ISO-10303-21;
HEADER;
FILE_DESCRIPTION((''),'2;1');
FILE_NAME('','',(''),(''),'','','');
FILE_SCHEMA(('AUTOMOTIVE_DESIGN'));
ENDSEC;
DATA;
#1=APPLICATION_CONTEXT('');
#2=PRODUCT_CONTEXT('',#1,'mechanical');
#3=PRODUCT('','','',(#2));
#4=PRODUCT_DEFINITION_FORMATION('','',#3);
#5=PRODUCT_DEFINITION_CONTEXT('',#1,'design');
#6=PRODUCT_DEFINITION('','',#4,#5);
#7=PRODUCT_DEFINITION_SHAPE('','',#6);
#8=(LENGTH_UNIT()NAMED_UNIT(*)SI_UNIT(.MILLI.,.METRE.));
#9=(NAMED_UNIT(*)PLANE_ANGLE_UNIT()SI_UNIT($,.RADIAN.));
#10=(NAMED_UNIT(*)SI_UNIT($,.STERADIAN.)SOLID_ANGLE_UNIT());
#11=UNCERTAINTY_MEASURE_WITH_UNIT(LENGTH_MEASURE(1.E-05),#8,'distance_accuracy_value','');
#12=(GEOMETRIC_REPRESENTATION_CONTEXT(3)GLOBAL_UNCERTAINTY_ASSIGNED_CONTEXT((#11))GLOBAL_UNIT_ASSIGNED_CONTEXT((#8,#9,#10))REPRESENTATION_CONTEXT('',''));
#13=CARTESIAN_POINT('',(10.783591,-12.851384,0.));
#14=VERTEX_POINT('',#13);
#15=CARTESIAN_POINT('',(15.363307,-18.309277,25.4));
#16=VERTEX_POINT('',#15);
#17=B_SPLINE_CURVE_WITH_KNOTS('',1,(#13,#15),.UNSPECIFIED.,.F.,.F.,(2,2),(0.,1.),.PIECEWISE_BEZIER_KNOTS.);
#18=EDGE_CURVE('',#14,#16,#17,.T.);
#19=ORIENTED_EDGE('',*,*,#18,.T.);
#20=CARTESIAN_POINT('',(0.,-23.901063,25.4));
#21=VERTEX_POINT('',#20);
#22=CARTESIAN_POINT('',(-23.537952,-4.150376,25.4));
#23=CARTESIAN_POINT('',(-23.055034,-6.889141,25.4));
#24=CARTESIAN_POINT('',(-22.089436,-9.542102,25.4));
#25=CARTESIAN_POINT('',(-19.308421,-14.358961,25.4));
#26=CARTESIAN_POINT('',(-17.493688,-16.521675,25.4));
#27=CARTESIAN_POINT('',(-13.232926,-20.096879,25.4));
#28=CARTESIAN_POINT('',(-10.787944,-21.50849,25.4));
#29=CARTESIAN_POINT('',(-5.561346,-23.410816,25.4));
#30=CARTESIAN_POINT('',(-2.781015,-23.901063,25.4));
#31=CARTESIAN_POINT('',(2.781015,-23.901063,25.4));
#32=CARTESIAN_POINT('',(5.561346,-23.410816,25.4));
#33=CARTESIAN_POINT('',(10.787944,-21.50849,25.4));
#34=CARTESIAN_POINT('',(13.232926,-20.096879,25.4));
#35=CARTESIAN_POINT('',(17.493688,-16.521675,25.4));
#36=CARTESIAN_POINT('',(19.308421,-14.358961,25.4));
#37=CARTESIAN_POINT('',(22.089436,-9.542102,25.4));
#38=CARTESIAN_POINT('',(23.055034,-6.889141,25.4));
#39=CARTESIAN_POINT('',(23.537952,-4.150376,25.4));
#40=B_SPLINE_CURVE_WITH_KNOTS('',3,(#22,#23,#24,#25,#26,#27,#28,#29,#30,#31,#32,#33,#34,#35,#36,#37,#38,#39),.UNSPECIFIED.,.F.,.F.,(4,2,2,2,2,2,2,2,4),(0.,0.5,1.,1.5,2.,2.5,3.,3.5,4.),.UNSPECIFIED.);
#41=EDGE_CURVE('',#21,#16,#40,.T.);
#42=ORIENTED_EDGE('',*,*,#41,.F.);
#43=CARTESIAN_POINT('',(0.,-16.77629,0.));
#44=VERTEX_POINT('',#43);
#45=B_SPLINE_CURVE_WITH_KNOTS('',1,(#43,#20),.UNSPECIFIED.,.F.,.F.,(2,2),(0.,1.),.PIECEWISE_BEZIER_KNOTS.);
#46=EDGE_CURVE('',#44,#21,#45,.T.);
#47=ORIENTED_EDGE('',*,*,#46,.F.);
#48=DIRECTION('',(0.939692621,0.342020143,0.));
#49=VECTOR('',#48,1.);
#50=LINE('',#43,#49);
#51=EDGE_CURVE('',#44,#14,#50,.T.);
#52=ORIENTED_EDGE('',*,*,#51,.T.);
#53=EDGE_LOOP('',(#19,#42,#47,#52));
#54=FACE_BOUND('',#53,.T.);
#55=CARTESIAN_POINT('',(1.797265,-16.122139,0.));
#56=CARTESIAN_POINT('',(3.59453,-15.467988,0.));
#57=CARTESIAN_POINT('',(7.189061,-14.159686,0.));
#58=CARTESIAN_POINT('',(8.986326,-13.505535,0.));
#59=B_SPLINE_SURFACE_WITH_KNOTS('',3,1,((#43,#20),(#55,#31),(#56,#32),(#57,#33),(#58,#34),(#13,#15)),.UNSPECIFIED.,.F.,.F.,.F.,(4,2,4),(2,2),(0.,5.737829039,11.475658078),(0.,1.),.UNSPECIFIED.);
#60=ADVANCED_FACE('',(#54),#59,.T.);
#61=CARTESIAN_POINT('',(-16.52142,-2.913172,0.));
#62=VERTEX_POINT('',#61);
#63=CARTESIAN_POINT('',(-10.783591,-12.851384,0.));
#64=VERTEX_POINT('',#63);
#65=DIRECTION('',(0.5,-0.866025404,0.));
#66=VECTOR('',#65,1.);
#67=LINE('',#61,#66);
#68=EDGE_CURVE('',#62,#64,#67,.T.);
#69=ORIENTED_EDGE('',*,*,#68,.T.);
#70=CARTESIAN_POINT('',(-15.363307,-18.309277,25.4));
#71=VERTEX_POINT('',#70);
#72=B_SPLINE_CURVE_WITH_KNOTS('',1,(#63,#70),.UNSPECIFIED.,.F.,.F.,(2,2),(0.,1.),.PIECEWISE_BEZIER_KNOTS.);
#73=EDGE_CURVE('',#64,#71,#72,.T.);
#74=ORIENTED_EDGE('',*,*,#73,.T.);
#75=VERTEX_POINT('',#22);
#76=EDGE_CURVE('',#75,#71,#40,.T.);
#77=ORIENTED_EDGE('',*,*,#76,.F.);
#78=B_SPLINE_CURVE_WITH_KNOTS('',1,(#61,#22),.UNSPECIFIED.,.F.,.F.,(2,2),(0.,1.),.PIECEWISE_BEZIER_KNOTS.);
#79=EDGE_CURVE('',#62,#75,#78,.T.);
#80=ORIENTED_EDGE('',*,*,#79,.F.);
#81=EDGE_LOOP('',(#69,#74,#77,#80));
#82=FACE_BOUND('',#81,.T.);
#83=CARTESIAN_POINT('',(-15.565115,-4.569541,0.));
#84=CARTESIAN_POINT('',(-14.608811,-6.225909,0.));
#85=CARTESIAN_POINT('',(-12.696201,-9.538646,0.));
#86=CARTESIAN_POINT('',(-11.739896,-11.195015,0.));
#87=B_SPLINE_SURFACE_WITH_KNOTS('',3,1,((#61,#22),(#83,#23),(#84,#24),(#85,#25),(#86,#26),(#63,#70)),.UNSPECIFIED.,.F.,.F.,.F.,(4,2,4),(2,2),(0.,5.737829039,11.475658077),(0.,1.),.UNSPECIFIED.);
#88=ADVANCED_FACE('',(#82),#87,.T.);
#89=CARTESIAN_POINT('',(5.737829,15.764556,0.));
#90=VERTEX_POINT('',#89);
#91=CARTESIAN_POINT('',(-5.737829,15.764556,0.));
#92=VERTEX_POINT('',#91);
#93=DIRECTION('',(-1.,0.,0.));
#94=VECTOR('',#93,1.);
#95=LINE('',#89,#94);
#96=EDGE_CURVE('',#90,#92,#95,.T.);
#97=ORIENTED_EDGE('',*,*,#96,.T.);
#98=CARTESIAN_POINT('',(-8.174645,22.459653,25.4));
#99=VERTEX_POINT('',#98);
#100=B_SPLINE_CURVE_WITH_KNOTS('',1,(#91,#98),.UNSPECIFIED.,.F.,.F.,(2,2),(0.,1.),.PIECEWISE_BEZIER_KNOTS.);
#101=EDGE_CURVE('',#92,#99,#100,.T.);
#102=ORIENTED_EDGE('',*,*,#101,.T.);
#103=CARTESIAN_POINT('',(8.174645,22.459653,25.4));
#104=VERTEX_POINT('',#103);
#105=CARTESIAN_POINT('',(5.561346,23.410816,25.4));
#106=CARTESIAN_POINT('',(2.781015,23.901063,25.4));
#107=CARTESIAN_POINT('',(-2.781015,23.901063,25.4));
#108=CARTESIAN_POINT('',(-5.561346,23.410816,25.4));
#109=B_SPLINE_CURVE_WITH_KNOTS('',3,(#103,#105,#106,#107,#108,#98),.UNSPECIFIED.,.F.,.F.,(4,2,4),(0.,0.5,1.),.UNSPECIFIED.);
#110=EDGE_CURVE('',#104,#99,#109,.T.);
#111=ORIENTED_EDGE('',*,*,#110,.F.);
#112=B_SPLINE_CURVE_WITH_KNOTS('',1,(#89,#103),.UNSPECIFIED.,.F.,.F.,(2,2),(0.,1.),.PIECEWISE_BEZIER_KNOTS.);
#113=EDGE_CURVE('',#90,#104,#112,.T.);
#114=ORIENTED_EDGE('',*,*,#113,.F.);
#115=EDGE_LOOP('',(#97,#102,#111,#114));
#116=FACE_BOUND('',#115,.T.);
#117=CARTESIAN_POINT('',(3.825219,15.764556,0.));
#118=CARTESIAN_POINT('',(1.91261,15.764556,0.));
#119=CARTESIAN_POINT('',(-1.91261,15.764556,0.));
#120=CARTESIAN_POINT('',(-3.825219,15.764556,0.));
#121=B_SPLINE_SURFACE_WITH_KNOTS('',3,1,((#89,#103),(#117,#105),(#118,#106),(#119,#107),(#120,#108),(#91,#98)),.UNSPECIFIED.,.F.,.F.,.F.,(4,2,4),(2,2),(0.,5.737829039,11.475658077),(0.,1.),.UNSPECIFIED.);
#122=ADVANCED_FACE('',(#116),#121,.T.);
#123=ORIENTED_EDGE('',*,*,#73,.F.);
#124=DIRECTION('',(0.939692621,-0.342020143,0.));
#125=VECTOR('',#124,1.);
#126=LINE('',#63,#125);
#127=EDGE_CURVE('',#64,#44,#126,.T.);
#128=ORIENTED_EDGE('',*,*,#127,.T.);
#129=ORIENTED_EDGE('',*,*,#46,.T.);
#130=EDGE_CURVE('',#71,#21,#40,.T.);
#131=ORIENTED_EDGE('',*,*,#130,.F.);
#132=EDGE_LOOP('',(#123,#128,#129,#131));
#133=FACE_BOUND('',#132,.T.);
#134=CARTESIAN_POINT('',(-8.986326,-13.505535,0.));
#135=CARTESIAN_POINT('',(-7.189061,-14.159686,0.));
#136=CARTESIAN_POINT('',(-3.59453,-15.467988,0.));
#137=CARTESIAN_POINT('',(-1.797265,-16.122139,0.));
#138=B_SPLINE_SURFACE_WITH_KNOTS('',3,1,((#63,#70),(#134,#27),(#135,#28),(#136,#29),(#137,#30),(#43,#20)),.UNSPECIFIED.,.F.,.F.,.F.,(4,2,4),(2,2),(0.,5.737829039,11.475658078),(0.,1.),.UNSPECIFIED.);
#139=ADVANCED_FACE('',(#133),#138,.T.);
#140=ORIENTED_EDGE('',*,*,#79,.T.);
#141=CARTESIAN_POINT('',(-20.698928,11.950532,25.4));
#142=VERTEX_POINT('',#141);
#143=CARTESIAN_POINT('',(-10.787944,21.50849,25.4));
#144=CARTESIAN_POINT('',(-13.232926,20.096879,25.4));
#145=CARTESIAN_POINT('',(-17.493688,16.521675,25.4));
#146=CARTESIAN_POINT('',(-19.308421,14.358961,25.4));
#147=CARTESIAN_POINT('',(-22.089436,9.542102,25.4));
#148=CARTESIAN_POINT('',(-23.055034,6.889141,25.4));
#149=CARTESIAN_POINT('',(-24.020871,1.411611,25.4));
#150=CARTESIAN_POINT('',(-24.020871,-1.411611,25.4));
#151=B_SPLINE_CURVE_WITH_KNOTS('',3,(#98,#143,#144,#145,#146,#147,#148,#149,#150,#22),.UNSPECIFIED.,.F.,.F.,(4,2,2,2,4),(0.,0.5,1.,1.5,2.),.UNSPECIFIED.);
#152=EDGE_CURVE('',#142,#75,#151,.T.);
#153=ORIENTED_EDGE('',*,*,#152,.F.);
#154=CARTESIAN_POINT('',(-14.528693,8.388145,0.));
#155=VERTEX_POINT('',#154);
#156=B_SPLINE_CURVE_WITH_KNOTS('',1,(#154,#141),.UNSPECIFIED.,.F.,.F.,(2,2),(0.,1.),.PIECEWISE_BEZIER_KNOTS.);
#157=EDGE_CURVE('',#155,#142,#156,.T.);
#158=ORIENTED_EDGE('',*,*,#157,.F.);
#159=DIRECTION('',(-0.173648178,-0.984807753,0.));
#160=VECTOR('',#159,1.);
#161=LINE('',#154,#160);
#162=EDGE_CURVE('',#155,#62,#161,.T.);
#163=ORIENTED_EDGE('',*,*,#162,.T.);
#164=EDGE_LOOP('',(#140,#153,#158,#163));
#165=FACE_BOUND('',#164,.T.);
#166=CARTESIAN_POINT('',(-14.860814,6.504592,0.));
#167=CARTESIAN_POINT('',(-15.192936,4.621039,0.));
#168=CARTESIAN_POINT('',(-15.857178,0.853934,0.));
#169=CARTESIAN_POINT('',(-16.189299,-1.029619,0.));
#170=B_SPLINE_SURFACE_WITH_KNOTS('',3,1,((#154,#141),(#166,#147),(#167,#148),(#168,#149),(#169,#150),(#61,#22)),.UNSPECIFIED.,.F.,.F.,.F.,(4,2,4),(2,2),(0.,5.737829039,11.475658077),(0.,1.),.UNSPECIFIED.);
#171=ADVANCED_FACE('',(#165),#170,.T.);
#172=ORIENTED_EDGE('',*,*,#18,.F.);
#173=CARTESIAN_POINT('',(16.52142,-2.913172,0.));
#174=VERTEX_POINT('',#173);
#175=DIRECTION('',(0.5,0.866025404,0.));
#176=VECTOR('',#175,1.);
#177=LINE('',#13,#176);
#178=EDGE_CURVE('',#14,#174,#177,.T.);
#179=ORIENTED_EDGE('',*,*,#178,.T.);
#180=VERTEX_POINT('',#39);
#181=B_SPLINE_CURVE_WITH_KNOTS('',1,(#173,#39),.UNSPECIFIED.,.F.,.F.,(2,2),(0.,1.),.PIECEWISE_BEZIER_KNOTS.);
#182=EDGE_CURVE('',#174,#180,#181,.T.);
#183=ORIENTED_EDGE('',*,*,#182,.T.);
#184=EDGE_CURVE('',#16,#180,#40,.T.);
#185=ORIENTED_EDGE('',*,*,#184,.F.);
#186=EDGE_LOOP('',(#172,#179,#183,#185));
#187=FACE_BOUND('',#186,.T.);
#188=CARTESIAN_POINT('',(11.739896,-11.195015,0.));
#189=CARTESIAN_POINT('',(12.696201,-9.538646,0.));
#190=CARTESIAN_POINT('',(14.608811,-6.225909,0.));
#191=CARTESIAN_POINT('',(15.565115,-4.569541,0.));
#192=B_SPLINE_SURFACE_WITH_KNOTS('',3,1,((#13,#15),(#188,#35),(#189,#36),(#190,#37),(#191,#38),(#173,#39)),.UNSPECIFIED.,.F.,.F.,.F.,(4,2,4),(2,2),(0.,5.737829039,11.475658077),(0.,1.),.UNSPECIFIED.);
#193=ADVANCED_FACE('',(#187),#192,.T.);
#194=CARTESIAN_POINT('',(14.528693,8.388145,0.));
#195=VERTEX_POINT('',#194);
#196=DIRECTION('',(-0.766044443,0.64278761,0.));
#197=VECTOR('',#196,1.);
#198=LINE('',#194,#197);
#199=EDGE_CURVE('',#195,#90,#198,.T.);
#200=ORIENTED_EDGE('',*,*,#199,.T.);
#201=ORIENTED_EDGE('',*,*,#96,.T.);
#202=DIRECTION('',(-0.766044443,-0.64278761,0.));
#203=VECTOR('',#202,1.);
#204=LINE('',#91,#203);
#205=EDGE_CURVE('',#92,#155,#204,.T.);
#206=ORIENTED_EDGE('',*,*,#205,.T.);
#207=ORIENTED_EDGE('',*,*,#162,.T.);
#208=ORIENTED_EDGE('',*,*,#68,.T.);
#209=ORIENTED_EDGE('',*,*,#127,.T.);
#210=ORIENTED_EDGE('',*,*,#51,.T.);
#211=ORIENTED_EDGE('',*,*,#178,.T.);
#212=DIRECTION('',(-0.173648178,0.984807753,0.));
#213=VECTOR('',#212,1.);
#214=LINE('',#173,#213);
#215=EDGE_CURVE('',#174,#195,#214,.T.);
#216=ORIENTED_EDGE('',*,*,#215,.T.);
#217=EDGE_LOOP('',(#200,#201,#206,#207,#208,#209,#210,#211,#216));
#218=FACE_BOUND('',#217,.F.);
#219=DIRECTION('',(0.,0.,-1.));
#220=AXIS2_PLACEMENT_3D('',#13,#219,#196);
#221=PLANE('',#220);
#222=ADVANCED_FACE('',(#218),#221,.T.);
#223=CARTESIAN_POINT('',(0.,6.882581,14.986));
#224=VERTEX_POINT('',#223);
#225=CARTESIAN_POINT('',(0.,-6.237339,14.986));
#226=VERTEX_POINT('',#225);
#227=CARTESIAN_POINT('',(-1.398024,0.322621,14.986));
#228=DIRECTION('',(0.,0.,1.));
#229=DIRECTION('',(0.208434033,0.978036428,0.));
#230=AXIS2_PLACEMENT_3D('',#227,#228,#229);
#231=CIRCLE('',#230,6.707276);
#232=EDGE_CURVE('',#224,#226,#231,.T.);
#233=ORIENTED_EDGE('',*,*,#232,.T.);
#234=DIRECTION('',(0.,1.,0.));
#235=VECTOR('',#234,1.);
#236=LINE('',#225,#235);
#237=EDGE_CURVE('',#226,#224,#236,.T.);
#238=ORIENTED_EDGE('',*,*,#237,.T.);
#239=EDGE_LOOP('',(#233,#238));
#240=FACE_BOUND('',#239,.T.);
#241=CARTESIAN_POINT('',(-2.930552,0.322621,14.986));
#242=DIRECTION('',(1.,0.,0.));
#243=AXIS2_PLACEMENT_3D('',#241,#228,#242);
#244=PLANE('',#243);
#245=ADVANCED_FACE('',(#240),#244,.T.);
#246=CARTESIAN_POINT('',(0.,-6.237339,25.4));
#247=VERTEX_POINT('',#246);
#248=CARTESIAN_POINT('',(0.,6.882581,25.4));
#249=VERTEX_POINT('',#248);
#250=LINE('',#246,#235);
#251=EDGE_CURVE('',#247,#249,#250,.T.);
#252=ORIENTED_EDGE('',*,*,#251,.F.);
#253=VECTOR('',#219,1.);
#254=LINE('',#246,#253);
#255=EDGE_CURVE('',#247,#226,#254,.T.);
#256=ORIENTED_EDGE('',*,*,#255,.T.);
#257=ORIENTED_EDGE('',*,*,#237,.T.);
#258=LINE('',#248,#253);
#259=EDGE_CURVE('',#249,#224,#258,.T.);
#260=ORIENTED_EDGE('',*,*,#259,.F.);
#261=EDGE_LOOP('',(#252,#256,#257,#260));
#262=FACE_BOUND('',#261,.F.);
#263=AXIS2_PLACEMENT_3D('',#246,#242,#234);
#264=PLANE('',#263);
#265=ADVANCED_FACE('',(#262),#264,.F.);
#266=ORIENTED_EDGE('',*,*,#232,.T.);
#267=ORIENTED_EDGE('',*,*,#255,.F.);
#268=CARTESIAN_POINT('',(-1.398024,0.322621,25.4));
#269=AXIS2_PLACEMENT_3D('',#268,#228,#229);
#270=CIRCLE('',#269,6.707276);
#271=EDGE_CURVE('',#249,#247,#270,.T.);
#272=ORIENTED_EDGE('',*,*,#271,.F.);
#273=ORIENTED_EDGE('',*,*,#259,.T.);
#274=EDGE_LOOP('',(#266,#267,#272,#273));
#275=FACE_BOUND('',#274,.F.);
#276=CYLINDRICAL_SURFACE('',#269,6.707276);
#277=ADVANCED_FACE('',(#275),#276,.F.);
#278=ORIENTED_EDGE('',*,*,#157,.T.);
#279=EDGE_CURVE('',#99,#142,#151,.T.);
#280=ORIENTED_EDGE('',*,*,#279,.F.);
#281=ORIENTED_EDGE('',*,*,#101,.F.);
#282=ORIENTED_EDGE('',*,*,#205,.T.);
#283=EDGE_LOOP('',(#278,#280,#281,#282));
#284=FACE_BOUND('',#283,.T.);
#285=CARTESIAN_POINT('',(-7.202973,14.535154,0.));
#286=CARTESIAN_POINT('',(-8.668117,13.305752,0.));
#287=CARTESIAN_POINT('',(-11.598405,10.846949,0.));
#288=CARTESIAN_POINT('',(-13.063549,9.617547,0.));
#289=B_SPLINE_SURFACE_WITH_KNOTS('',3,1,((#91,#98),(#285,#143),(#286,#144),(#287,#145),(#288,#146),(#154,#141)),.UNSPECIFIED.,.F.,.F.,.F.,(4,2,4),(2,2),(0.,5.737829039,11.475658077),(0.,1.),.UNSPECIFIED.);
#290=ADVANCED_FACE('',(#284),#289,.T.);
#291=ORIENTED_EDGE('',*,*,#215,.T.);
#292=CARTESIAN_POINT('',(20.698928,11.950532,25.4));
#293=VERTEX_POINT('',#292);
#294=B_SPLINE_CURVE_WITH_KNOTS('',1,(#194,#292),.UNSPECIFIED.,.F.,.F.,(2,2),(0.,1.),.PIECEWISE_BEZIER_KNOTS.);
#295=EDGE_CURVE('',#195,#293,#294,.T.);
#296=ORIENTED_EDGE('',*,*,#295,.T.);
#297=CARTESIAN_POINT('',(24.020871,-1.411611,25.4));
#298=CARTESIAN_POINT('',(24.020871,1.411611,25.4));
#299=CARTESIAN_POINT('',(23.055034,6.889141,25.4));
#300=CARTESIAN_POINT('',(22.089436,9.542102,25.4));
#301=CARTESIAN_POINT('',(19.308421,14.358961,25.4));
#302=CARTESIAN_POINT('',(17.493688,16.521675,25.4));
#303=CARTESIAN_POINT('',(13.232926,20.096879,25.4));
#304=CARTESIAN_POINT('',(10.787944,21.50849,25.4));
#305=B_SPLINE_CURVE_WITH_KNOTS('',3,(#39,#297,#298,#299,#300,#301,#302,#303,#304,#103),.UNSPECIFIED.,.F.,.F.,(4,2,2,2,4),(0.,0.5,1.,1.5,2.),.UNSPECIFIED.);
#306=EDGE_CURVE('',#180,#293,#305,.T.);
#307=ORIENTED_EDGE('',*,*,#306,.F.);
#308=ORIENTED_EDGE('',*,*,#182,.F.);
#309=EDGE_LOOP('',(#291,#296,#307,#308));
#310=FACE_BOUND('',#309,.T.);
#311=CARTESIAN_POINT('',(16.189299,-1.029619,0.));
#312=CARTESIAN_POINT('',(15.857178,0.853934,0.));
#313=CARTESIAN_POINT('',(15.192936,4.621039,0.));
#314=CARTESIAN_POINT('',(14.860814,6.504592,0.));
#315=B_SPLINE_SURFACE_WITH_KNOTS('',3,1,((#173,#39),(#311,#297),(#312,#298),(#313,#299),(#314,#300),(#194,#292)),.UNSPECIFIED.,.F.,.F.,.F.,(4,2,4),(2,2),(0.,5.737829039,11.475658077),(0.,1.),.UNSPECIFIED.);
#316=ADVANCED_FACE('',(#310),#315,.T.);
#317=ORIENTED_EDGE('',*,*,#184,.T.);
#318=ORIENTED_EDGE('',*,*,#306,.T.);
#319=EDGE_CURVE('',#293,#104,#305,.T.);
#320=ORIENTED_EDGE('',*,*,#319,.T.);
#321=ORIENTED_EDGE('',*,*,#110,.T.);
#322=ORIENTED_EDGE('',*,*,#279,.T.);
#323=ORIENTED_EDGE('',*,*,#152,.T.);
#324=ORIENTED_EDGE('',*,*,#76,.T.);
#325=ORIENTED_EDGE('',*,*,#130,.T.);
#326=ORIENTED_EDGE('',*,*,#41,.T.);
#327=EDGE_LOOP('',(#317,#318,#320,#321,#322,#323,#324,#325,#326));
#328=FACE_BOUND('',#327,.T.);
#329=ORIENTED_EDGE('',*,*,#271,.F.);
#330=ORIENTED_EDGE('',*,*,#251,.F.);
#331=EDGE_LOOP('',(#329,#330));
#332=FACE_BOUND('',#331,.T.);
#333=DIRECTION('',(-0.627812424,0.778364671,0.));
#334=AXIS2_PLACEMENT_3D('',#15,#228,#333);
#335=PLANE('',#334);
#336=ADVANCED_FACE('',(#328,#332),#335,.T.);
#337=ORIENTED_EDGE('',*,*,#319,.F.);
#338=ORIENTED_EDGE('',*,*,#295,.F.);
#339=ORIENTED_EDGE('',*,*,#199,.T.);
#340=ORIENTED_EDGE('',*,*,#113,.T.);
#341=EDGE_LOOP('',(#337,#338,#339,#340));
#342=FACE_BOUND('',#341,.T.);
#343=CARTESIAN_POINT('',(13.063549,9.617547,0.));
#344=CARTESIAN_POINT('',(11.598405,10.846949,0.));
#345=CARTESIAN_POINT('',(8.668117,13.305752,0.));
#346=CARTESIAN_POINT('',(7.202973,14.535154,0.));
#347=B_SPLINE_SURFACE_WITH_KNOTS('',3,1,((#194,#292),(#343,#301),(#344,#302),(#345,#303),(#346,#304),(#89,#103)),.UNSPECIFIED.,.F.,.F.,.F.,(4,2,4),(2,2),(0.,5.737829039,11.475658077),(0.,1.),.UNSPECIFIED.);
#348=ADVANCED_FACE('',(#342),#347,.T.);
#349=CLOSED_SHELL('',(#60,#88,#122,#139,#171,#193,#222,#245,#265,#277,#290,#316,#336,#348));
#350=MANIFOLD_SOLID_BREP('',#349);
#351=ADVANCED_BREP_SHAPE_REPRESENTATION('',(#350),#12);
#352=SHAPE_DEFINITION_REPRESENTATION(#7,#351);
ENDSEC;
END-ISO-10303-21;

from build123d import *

# Parameters (mm, degrees)
F5_DEPTH = 10.414


# Not quite as in the source:
# - the arcs of a loft's sections are written as splines that run evenly, so that the points pair up as in the source's solid


with BuildPart() as f3:
    # F0 (on Top) → F3 section 0
    with BuildSketch(Plane.XY):
        Polygon((10.7835912141, -12.8513835704), (16.5214202528, -2.9131721502), (14.5286931401, 8.3881448954), (5.7378290387, 15.7645557206), (-5.7378290387, 15.7645557206), (-14.5286931401, 8.3881448954), (-16.5214202528, -2.9131721502), (-10.7835912141, -12.8513835704), (0, -16.7762897909), align=None)
    # F2 (on offset) → F3 section 1
    with BuildSketch(Plane.XY.offset(25.4)):
        with BuildLine():
            add(Edge.make_bspline(
                [(15.363307355, -18.3092767345), (17.4936884395, -16.5216747522), (19.3084205069, -14.3589612913), (22.0894355037, -9.5421020203), (23.0550342683, -6.8891412184), (23.5379524545, -4.1503760884)],
                knots=[0, 0, 0, 0, 0.5, 0.5, 1, 1, 1, 1], degree=3))
            add(Edge.make_bspline(
                [(23.5379524545, -4.1503760884), (24.0208706408, -1.4116109583), (24.0208706408, 1.4116109583), (23.0550342683, 6.8891412184), (22.0894355037, 9.5421020203), (20.6989280053, 11.9505316558)],
                knots=[0, 0, 0, 0, 0.5, 0.5, 1, 1, 1, 1], degree=3))
            add(Edge.make_bspline(
                [(20.6989280053, 11.9505316558), (19.3084205069, 14.3589612913), (17.4936884395, 16.5216747522), (13.2329262705, 20.0968787168), (10.7879443702, 21.5084896751), (8.1746450995, 22.4596528229)],
                knots=[0, 0, 0, 0, 0.5, 0.5, 1, 1, 1, 1], degree=3))
            add(Edge.make_bspline(
                [(8.1746450995, 22.4596528229), (5.5613458287, 23.4108159707), (2.7810149968, 23.9010633116), (-2.7810149968, 23.9010633116), (-5.5613458287, 23.4108159707), (-8.1746450995, 22.4596528229)],
                knots=[0, 0, 0, 0, 0.5, 0.5, 1, 1, 1, 1], degree=3))
            add(Edge.make_bspline(
                [(-8.1746450995, 22.4596528229), (-10.7879443702, 21.5084896751), (-13.2329262705, 20.0968787168), (-17.4936884395, 16.5216747522), (-19.3084205069, 14.3589612913), (-20.6989280053, 11.9505316558)],
                knots=[0, 0, 0, 0, 0.5, 0.5, 1, 1, 1, 1], degree=3))
            add(Edge.make_bspline(
                [(-20.6989280053, 11.9505316558), (-22.0894355037, 9.5421020203), (-23.0550342683, 6.8891412184), (-24.0208706408, 1.4116109583), (-24.0208706408, -1.4116109583), (-23.5379524545, -4.1503760884)],
                knots=[0, 0, 0, 0, 0.5, 0.5, 1, 1, 1, 1], degree=3))
            add(Edge.make_bspline(
                [(-23.5379524545, -4.1503760884), (-23.0550342683, -6.8891412184), (-22.0894355037, -9.5421020203), (-19.3084205069, -14.3589612913), (-17.4936884395, -16.5216747522), (-15.363307355, -18.3092767345)],
                knots=[0, 0, 0, 0, 0.5, 0.5, 1, 1, 1, 1], degree=3))
            add(Edge.make_bspline(
                [(-15.363307355, -18.3092767345), (-13.2329262705, -20.0968787168), (-10.7879443702, -21.5084896751), (-5.5613458287, -23.4108159707), (-2.7810149968, -23.9010633116), (0, -23.9010633116)],
                knots=[0, 0, 0, 0, 0.5, 0.5, 1, 1, 1, 1], degree=3))
            add(Edge.make_bspline(
                [(0, -23.9010633116), (2.7810149968, -23.9010633116), (5.5613458287, -23.4108159707), (10.7879443702, -21.5084896751), (13.2329262705, -20.0968787168), (15.363307355, -18.3092767345)],
                knots=[0, 0, 0, 0, 0.5, 0.5, 1, 1, 1, 1], degree=3))
        make_face()
    loft(ruled=True)

    # F4 (on face) → F5 (cut)
    with BuildSketch(Plane.XY.offset(25.4)):
        with BuildLine():
            Line((0, -6.2373387627), (0, 6.8825809285))
            ThreePointArc((0, 6.8825809285), (-8.1053000761, 0.3226210829), (0, -6.2373387627))
        make_face()
    extrude(amount=-F5_DEPTH, mode=Mode.SUBTRACT)


solid = f3.part
